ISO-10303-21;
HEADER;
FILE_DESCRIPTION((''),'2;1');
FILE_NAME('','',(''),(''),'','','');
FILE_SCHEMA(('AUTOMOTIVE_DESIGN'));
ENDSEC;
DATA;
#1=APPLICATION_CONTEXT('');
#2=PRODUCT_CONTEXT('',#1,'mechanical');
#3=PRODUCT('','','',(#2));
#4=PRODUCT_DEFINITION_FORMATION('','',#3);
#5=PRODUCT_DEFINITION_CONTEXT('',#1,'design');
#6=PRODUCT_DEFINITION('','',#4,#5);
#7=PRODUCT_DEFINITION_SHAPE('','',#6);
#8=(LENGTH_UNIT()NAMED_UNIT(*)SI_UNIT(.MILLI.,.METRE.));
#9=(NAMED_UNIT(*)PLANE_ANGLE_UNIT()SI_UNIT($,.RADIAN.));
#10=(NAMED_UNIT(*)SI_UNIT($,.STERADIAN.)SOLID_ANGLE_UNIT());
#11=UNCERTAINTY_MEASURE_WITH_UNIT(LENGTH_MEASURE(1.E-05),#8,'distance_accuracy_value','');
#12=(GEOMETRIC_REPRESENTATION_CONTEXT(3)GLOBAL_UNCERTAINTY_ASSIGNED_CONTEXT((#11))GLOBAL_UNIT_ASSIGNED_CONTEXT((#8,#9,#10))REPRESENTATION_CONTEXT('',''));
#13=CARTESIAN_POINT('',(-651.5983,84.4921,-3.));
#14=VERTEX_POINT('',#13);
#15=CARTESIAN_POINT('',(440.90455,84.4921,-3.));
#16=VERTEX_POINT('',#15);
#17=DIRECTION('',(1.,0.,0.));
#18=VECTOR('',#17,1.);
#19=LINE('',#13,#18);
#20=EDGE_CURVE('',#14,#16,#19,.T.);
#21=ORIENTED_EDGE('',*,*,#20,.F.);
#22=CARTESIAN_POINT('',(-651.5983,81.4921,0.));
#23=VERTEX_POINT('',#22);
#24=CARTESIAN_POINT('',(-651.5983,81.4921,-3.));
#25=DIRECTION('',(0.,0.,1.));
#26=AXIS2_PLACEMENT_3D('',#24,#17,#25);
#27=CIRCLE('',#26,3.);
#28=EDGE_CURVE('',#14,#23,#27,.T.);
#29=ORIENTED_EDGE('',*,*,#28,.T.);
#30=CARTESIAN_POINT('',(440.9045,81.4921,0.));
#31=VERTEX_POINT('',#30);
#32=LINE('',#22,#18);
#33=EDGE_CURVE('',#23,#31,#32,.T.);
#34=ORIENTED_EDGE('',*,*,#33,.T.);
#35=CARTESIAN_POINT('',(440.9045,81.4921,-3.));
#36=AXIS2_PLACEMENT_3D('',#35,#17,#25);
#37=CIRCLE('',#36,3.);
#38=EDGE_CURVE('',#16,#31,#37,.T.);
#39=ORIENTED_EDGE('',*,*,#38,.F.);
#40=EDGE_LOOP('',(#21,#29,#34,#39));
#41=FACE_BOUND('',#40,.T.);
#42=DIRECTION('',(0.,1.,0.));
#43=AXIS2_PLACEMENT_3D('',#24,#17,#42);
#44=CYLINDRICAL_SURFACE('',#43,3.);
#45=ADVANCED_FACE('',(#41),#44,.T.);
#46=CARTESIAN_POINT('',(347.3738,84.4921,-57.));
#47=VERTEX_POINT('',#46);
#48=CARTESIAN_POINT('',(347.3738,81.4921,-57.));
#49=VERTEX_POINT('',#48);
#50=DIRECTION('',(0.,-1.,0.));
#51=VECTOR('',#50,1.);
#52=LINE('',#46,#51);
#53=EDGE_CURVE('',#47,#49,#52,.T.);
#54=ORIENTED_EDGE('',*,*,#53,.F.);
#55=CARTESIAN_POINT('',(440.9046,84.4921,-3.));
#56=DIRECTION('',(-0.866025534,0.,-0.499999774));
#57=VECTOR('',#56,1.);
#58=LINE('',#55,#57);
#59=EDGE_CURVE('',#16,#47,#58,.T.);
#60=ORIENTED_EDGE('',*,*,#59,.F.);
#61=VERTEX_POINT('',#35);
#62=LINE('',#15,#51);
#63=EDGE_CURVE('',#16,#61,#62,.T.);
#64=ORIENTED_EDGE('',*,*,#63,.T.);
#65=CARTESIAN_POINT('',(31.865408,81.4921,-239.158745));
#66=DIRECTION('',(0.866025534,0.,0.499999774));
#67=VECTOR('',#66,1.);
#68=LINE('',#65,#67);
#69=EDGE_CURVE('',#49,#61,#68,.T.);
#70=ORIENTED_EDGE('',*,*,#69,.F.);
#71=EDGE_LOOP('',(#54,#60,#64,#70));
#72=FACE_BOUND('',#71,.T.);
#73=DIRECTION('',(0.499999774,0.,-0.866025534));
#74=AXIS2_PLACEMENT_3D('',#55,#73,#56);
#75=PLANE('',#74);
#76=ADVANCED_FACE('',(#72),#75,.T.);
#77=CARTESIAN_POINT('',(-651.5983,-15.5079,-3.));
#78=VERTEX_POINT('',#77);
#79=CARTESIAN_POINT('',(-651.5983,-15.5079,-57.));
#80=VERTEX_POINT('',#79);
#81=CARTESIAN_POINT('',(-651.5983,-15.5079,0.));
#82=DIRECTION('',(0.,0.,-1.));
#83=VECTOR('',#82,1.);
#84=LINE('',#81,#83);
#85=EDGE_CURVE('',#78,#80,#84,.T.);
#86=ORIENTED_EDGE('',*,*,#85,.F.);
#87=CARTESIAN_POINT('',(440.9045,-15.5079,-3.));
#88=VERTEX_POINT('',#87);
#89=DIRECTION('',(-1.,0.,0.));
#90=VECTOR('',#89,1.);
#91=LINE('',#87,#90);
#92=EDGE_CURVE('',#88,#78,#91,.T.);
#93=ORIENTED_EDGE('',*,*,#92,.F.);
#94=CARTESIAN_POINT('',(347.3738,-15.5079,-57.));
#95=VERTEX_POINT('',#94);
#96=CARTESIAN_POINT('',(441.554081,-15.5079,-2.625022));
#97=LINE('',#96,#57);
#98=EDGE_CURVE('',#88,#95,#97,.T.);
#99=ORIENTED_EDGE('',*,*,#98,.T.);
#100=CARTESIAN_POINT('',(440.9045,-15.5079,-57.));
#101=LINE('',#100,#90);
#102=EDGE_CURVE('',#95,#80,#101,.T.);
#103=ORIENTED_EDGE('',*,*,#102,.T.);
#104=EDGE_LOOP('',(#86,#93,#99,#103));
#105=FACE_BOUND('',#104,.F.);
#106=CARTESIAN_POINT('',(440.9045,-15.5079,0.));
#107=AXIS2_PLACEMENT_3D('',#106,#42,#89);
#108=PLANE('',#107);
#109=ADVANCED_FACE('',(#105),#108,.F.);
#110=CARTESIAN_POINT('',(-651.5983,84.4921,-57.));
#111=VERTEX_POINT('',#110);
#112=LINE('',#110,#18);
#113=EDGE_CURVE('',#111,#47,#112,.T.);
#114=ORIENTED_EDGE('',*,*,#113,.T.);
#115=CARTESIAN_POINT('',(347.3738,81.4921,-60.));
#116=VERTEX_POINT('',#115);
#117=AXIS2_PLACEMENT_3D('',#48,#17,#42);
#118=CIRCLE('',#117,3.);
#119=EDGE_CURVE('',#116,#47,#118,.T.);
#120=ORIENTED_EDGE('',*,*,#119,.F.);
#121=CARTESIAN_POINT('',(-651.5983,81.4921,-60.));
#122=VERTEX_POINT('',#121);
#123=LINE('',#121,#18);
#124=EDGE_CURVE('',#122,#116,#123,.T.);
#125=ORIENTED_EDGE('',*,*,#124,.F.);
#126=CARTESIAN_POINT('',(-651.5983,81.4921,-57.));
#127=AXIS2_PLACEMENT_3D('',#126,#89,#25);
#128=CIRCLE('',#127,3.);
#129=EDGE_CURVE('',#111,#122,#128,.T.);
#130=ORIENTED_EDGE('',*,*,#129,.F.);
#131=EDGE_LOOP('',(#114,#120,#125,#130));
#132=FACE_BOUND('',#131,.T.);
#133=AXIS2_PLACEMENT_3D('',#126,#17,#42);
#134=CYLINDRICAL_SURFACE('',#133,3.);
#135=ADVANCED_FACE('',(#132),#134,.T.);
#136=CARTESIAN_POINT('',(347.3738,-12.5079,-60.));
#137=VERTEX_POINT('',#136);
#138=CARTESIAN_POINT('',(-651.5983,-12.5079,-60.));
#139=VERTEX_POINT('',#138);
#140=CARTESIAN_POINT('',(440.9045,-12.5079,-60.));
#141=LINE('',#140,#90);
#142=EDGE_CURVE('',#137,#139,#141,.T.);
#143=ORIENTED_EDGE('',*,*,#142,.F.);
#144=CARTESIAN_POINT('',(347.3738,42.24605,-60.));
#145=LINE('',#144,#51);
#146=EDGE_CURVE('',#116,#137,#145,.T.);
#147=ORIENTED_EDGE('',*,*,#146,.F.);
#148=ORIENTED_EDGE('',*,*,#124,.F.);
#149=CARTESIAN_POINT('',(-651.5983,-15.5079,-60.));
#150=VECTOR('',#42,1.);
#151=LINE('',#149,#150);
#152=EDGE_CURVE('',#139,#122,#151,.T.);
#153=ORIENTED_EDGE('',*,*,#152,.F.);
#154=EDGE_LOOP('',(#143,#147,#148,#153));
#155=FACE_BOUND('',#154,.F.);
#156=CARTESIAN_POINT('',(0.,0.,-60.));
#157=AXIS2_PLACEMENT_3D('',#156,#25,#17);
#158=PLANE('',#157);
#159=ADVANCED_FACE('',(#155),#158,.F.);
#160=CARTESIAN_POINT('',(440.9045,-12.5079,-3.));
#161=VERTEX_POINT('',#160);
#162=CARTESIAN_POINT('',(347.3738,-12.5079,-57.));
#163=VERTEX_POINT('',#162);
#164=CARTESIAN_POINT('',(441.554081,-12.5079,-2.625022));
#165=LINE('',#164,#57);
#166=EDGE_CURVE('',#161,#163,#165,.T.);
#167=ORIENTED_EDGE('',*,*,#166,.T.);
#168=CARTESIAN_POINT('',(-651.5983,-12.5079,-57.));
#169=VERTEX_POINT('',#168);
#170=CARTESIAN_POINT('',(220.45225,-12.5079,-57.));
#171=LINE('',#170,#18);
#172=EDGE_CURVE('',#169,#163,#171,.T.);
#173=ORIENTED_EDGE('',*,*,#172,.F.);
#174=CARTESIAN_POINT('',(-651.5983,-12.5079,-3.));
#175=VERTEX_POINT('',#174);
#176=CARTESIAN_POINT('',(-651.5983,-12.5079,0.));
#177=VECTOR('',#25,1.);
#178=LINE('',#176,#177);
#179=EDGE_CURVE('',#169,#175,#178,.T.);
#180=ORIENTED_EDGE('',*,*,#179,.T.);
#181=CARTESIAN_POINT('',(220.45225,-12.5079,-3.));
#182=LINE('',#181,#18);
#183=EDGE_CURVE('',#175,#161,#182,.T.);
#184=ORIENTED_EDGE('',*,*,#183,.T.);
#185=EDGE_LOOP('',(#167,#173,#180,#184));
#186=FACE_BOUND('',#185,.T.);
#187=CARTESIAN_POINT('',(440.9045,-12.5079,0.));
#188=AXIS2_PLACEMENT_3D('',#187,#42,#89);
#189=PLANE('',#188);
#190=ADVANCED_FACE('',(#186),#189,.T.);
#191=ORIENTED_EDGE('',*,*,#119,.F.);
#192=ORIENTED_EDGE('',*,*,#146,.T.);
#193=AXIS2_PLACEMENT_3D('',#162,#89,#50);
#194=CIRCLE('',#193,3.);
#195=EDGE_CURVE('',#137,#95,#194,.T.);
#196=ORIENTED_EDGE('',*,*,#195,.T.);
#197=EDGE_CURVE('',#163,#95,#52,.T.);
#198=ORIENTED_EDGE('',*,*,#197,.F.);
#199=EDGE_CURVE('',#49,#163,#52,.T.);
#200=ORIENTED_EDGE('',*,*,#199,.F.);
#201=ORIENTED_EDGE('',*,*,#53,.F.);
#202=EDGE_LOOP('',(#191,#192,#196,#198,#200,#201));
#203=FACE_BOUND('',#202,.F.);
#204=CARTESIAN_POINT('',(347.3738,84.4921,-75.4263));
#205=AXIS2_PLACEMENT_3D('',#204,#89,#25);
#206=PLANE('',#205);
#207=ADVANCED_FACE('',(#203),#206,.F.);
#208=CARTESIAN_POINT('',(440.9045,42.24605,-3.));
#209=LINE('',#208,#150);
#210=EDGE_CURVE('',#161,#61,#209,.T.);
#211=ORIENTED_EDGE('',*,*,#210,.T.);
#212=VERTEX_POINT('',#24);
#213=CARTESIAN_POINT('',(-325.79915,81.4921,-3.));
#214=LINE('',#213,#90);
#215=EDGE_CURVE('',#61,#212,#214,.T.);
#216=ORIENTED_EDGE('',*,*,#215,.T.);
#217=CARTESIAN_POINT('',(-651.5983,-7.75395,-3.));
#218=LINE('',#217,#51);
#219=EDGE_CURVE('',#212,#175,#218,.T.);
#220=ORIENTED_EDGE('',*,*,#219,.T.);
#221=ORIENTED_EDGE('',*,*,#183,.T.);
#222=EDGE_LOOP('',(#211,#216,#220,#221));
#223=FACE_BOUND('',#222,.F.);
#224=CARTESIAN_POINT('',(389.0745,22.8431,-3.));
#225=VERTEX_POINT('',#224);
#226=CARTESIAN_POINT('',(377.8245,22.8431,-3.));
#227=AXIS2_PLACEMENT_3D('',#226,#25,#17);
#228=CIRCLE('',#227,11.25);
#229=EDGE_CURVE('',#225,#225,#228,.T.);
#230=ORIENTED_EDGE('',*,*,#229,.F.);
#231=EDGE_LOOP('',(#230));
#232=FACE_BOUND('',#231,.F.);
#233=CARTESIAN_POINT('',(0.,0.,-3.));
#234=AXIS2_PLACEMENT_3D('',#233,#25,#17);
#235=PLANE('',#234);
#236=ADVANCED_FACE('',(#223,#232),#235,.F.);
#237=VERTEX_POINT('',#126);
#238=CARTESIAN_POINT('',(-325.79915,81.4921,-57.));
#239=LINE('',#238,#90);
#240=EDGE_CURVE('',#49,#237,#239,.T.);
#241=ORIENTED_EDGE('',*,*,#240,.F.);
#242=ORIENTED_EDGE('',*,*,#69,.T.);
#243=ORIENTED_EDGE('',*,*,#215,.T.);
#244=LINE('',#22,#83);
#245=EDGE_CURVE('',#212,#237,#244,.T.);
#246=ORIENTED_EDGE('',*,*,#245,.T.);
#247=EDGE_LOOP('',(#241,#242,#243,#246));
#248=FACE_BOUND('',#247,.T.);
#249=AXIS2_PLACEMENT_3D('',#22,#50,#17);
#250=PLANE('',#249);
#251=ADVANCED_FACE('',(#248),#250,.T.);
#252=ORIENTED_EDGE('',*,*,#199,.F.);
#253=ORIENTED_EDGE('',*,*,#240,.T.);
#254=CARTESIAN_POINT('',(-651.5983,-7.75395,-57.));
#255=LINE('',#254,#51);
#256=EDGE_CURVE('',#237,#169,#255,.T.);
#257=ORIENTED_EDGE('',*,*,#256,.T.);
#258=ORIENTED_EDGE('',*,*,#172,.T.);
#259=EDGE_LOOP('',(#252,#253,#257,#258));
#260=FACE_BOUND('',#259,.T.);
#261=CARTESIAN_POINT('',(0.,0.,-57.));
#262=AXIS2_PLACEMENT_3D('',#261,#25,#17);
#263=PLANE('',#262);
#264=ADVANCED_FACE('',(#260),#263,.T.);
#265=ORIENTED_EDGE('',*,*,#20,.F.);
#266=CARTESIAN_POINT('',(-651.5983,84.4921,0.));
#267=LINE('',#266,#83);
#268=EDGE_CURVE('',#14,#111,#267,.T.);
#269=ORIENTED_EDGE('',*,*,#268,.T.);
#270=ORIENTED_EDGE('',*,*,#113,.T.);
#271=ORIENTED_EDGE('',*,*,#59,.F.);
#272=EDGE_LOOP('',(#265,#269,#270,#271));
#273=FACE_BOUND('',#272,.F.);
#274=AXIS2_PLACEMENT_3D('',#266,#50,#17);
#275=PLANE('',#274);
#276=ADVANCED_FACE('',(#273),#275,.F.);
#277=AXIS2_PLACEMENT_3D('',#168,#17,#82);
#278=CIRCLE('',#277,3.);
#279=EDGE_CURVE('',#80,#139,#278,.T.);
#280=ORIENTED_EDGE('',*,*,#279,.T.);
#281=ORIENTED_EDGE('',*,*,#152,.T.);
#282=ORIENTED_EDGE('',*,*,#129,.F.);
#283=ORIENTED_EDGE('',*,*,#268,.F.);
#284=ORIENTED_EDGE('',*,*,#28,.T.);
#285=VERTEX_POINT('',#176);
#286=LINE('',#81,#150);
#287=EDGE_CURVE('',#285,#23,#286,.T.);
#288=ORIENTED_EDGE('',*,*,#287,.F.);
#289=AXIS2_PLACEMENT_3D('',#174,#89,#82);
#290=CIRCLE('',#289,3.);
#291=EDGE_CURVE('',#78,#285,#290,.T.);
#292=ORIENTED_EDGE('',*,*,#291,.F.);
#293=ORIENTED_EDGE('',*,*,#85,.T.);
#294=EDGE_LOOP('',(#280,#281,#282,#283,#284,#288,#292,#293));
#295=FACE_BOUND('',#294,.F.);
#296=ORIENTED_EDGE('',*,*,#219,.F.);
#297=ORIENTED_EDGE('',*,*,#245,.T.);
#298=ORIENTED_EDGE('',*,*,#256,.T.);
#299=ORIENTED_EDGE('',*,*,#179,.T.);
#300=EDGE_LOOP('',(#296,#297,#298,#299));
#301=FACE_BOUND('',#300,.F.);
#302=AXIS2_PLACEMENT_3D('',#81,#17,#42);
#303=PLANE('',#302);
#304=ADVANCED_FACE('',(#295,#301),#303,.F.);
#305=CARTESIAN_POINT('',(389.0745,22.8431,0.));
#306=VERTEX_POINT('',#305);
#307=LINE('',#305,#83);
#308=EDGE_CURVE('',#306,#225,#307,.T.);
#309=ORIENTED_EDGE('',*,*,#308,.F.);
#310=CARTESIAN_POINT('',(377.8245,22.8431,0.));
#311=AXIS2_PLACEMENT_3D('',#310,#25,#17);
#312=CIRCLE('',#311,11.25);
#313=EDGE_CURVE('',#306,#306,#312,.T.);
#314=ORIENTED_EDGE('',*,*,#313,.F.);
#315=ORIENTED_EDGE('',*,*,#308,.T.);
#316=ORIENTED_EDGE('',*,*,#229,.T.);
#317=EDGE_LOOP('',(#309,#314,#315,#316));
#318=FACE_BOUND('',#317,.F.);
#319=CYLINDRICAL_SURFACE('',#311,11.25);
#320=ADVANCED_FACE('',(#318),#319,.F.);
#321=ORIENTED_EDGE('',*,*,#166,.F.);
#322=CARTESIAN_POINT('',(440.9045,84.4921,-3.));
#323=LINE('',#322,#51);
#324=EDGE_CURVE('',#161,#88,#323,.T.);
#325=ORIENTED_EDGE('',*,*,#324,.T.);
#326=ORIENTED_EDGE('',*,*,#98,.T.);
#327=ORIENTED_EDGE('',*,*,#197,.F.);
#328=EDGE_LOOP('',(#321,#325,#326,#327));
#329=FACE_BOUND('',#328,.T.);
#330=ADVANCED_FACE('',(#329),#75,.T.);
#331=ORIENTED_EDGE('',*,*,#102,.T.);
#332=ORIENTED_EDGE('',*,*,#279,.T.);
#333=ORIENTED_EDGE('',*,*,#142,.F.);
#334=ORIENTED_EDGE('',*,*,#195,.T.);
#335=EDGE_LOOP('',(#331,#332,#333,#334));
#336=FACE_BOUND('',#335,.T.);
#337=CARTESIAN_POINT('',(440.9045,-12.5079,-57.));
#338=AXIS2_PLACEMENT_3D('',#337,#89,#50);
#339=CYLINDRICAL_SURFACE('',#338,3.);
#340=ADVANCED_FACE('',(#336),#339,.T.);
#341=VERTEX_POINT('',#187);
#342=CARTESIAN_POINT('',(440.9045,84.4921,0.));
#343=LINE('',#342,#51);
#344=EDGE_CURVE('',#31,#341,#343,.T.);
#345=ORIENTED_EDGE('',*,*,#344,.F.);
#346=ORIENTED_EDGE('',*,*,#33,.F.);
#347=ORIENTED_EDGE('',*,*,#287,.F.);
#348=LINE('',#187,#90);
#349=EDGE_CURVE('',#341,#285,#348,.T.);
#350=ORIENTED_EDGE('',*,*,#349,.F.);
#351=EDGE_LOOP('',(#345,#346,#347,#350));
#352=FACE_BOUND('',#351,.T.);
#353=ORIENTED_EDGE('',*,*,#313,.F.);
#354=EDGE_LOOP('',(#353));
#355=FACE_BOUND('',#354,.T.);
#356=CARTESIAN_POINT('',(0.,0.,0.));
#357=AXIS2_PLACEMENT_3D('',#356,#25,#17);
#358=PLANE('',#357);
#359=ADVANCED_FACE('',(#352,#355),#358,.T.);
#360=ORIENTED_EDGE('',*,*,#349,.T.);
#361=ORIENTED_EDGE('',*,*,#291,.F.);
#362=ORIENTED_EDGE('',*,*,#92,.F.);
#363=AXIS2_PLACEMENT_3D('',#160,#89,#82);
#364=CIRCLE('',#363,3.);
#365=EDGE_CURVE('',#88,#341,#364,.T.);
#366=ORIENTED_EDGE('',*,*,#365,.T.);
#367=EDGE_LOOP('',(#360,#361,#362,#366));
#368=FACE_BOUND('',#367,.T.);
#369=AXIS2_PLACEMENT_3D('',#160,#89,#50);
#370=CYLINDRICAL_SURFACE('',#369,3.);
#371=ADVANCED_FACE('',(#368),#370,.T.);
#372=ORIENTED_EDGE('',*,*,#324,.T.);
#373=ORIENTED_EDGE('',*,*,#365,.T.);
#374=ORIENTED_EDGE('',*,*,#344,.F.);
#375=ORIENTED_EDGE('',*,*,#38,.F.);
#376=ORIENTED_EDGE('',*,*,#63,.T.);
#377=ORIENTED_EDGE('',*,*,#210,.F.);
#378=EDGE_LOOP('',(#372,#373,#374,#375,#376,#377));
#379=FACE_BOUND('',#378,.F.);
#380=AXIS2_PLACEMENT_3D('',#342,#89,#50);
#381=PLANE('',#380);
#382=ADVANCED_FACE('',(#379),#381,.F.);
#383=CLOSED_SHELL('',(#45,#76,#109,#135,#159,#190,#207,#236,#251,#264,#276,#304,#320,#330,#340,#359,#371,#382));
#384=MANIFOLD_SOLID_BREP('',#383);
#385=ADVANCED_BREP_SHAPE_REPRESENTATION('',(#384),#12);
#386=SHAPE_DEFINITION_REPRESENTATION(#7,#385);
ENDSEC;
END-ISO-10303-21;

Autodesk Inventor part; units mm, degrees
ref_plane "YZ Plane" through (0, 0, 0) normal (1, 0, 0) x (0, 1, 0)
ref_plane "XZ Plane" through (0, 0, 0) normal (0, 1, 0) x (-1, 0, 0)
ref_plane "XY Plane" through (0, 0, 0) normal (0, 0, 1) x (1, 0, 0)
sketch "Sketch1" plane through (0, 0, 0) normal (0, 0, 1) x (1, 0, 0)
  line L0 (-651.5983, 84.4921) -> (440.9045, 84.4921)
  line L1 (440.9045, 84.4921) -> (440.9045, -15.5079)
  line L2 (440.9045, -15.5079) -> (-651.5983, -15.5079)
  line L3 (-651.5983, -15.5079) -> (-651.5983, 84.4921)
  line L4 (-651.5983, -15.5079) -> (-899.2765, -81.873) projected
  point P0 (0, 0)
  dimension "d0" = 100
extrude "Extrusion1" add sketch "Sketch1" against normal blind 60
fillet "Fillet1" radius 3 4 edges at (-105.3469, 84.4921, 0) (-105.3469, 84.4921, -60) (-105.3469, -15.5079, 0) (-105.3469, -15.5079, -60)
shell "Shell1" thickness 3 removed faces 2 at (440.9045, 18.8255, -40) at (-651.5983, 18.8255, -40)
sketch "Sketch2" plane through (0, 0, 0) normal (0, 0, 1) x (1, 0, 0)
  circle A0 centre (377.8245, 22.8431) radius 11.25 projected
  point P0 (0, 0)
extrude "Extrusion2" cut sketch "Sketch2" against normal through all
sketch "Sketch3" plane through (-651.5983, 84.4921, -57) normal (0, 1, 0) x (1, 0, 0)
  line L0 (0, 0) -> (1092.5029, 0) projected
  line L1 (0, -54) -> (0, 0) projected
  line L2 (1092.5029, -54) -> (0, -54) projected
  line L3 (1092.5029, -54) -> (1092.5029, 0) projected
  line L4 (1092.5029, -54) -> (998.9721, 0)
  line L5 (0, 0) -> (1092.5029, 0) projected
  line L6 (1092.5029, -54) -> (1101.6667, -54)
  line L7 (1101.6667, -54) -> (1101.6667, 18.4263)
  line L8 (1101.6667, 18.4263) -> (998.9721, 18.4263)
  line L9 (998.9721, 18.4263) -> (998.9721, 0)
  point P0 (651.5983, -57)
  dimension "d8" = 30
extrude "Extrusion3" cut sketch "Sketch3" against normal through all contours L9 L8 L7 L6 L3 L0 | L0 L3 L4
properties part number "Barra nuevo pivote"
